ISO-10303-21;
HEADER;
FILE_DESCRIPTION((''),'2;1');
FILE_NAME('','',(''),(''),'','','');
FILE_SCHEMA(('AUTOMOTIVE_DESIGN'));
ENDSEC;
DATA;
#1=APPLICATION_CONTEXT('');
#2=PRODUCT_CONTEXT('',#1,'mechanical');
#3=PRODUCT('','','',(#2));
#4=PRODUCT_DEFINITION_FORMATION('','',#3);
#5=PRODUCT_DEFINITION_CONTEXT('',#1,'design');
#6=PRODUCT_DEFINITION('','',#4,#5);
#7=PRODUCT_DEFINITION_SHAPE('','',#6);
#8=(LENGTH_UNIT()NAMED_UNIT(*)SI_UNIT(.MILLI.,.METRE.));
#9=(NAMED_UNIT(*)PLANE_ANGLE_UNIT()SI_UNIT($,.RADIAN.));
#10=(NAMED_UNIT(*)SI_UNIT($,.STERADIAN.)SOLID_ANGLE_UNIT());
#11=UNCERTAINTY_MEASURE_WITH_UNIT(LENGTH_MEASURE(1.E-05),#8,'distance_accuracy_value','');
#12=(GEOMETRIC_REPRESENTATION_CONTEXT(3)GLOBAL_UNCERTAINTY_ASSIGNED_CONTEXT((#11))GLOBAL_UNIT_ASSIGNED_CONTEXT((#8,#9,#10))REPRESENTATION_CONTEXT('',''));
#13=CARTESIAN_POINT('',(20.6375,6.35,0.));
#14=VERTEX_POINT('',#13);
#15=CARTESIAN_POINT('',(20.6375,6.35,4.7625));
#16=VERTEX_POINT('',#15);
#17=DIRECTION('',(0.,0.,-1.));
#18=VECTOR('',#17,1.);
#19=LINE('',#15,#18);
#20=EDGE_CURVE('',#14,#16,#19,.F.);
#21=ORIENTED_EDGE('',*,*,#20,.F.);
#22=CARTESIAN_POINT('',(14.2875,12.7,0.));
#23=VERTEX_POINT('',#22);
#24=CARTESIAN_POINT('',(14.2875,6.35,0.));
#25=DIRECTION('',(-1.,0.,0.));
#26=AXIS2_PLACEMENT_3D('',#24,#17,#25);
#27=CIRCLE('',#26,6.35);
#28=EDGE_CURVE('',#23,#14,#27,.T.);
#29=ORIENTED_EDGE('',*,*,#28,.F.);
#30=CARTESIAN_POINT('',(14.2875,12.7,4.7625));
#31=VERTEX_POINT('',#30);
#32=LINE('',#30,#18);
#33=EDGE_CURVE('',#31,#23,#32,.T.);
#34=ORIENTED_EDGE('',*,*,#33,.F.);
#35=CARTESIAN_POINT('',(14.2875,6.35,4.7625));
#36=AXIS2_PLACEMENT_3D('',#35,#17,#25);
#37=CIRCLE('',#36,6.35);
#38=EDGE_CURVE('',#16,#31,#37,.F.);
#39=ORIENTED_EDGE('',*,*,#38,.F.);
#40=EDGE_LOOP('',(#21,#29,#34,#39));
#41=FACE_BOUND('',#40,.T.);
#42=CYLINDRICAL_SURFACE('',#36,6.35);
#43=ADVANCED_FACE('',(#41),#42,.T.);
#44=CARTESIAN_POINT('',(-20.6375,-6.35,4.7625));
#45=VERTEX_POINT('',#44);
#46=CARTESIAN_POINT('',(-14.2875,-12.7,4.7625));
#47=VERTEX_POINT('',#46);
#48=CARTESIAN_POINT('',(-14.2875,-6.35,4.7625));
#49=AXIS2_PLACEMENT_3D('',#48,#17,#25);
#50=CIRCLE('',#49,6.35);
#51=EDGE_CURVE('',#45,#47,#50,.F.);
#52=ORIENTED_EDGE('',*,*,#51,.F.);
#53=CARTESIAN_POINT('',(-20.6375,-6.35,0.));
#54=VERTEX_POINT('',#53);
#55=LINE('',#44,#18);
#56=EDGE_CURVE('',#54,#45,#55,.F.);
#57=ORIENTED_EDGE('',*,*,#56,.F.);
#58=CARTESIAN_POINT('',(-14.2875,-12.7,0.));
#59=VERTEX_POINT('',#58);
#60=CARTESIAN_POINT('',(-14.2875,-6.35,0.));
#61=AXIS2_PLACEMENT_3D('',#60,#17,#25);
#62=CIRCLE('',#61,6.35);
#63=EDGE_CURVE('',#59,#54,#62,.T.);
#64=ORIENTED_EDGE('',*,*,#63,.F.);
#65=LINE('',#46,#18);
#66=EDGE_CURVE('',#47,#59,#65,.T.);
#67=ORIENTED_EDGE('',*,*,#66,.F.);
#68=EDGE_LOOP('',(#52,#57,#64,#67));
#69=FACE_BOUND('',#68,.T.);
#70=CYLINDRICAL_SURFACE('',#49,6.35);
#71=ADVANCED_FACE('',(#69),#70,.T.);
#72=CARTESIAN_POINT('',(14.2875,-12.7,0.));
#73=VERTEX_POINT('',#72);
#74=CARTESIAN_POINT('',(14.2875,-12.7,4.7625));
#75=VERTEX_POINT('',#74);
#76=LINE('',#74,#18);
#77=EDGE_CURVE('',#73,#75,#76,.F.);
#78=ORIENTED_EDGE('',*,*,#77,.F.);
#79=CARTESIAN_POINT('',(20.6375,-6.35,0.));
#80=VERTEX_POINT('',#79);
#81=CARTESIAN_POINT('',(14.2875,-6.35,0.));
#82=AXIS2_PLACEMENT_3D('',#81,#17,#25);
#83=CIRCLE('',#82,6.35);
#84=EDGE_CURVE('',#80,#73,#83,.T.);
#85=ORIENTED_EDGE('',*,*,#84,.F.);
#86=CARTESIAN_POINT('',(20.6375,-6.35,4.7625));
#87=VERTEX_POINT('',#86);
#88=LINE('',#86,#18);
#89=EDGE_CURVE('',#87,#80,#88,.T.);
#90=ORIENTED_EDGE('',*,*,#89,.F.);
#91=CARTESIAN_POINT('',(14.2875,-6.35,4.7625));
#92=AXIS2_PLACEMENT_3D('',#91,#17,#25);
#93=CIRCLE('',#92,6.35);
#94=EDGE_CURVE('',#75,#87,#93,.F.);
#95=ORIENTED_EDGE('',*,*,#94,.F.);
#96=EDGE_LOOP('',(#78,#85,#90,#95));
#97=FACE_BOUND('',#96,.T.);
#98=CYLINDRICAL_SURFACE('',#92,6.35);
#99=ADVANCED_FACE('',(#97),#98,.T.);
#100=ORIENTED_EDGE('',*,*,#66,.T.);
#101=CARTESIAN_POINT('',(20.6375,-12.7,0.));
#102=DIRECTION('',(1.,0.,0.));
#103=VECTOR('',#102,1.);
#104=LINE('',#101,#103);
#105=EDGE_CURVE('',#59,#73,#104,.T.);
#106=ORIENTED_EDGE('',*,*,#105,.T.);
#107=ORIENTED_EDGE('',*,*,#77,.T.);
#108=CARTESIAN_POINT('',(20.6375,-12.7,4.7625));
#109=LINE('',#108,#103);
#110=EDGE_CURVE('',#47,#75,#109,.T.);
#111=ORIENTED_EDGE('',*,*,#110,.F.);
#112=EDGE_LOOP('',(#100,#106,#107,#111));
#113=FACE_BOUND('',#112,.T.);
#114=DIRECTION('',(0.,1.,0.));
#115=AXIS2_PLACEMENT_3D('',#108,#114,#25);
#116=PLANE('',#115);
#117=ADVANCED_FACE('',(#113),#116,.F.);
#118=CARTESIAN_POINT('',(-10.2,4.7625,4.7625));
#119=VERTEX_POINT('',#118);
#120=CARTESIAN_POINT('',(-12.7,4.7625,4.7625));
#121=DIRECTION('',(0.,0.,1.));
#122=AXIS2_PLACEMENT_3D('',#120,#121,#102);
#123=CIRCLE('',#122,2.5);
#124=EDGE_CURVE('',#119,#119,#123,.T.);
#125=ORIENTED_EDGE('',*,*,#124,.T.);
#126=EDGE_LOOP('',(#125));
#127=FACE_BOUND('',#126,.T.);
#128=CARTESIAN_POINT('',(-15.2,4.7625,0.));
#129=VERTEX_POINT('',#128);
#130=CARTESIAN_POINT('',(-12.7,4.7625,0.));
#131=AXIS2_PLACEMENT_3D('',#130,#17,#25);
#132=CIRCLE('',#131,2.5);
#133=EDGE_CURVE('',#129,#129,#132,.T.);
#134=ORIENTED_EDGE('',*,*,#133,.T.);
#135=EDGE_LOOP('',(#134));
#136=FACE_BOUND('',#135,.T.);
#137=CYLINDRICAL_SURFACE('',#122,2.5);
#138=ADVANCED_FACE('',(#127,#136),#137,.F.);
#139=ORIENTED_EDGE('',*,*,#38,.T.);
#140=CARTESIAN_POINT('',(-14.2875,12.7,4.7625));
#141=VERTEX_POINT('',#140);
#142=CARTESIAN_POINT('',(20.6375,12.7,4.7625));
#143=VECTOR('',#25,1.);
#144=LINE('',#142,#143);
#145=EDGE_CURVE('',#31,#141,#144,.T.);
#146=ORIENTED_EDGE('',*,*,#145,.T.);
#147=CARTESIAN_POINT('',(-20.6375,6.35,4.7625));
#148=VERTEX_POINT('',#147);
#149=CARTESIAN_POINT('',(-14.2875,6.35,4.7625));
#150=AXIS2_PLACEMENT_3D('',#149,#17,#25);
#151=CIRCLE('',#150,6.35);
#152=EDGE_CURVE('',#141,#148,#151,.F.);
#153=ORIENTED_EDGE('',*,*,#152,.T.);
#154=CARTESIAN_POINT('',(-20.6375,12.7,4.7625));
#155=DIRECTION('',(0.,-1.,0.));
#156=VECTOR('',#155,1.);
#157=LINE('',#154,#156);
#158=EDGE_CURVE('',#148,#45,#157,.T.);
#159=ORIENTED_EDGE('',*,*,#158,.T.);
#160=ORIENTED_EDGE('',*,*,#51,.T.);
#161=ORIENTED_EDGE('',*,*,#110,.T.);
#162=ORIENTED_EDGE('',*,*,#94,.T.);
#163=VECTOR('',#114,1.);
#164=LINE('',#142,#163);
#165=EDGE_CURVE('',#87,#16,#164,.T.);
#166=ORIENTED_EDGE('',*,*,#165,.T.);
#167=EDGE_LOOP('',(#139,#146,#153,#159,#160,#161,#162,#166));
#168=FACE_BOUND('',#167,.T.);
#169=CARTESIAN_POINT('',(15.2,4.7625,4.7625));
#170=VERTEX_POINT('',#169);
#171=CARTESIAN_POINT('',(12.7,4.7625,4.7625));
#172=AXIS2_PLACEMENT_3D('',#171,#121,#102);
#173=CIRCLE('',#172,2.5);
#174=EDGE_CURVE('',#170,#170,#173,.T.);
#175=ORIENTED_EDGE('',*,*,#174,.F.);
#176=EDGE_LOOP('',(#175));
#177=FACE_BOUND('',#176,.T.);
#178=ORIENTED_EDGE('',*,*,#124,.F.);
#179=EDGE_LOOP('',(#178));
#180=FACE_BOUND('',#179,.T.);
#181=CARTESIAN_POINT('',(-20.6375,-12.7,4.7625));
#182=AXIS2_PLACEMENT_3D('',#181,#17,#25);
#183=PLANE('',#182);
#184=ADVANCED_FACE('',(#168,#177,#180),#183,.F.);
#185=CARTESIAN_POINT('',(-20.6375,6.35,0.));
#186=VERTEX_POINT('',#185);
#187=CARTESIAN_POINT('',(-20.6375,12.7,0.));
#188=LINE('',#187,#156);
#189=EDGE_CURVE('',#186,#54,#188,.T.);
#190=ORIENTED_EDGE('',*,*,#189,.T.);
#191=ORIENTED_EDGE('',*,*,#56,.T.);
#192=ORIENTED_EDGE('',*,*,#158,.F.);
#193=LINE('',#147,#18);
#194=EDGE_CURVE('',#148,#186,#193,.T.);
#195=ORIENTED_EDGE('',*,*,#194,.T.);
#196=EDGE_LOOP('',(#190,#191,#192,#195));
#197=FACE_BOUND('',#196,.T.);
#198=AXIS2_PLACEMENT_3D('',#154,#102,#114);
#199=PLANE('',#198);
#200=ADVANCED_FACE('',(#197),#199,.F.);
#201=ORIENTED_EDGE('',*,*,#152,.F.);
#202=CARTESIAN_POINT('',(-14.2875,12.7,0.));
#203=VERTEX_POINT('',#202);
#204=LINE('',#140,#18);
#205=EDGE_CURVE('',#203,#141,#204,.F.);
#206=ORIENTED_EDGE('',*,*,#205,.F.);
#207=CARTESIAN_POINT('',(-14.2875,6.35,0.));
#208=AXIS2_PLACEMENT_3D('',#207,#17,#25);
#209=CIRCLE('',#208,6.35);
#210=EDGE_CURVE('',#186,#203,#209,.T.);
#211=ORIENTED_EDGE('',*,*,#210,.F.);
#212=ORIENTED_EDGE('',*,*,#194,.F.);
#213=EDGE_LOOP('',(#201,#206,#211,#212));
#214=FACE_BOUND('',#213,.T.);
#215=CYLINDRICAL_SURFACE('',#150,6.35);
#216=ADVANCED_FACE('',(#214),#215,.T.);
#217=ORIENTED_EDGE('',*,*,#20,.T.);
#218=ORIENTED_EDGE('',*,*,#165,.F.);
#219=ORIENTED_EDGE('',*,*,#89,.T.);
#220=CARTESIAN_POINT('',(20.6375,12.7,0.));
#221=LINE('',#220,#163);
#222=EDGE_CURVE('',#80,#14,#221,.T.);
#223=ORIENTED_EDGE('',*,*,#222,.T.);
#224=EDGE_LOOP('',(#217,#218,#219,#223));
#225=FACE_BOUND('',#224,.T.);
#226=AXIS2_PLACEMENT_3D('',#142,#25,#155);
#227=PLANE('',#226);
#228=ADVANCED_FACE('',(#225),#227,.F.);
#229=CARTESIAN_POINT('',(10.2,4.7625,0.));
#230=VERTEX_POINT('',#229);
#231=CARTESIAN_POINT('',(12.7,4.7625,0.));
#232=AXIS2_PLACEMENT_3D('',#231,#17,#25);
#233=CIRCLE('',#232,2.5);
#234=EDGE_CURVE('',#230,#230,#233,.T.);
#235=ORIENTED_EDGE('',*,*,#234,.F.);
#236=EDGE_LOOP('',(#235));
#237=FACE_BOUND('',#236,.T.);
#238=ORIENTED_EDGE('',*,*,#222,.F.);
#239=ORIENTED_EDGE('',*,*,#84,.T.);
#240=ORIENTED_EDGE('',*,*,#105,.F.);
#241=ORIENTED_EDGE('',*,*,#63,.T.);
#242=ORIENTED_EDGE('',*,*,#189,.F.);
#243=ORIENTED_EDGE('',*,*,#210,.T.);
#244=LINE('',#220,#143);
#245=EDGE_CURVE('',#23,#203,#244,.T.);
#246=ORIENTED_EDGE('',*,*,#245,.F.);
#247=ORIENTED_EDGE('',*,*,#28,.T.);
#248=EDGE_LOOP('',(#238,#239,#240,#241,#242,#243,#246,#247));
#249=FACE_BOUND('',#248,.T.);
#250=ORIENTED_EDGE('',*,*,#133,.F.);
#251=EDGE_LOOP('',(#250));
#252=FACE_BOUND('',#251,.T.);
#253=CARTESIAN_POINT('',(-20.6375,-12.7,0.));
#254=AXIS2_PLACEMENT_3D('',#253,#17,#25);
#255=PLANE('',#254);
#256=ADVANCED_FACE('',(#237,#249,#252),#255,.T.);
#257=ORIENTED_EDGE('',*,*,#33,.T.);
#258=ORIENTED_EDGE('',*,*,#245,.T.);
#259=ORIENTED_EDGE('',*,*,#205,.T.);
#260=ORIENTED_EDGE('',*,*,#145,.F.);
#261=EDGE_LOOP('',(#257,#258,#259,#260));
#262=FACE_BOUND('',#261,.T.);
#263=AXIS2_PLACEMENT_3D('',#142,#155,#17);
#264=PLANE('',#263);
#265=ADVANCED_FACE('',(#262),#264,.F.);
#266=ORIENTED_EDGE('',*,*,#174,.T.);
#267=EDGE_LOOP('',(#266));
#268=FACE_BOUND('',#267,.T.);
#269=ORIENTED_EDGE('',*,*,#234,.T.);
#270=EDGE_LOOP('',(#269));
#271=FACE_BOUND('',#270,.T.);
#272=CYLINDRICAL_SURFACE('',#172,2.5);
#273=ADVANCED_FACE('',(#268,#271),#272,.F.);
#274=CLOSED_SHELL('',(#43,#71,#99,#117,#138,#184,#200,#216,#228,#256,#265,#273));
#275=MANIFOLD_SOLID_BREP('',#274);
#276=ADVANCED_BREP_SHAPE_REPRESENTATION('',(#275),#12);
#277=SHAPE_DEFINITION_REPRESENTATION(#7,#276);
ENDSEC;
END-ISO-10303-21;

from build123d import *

# Parameters (mm, degrees)
SKETCH1_W             = 41.275
SKETCH1_H             = 25.4
BASE_FLANGE1_DEPTH    = 4.7625
BREAK_CORNER1_DEPTH   = 4.7625
M6X1_0_TAPPED_HOLE1_D = 5


# Read off the part's stored shape, not the designer's step: Break-Corner1
# Sheet-metal steps are written as plain solids
with BuildPart() as part:
    # Sketch1 → Base-Flange1 (new body)
    with BuildSketch(Plane.XY):
        Rectangle(SKETCH1_W, SKETCH1_H)
    extrude(amount=BASE_FLANGE1_DEPTH)

    # Break-Corner1 outline → Break-Corner1 (cut)
    with BuildSketch(Plane.XY):
        with BuildLine():
            Line((-20.6375, 12.7), (-20.6375, 6.35))
            ThreePointArc((-20.6375, 6.35), (-18.777628061, 10.840128061), (-14.2875, 12.7))
            Line((-14.2875, 12.7), (-20.6375, 12.7))
        make_face()
        with BuildLine():
            ThreePointArc((-14.2875, -12.7), (-18.777628061, -10.840128061), (-20.6375, -6.35))
            Line((-20.6375, -6.35), (-20.6375, -12.7))
            Line((-20.6375, -12.7), (-14.2875, -12.7))
        make_face()
        with BuildLine():
            Line((20.6375, 12.7), (14.2875, 12.7))
            ThreePointArc((14.2875, 12.7), (18.777628061, 10.840128061), (20.6375, 6.35))
            Line((20.6375, 6.35), (20.6375, 12.7))
        make_face()
        with BuildLine():
            ThreePointArc((20.6375, -6.35), (18.777628061, -10.840128061), (14.2875, -12.7))
            Line((14.2875, -12.7), (20.6375, -12.7))
            Line((20.6375, -12.7), (20.6375, -6.35))
        make_face()
    extrude(amount=BREAK_CORNER1_DEPTH, mode=Mode.SUBTRACT)

    # M6x1.0 Tapped Hole1 (through all)
    with Locations(Plane.XY.offset(4.7625)):
        with Locations((-12.7, 4.7625), (12.7, 4.7625)):
            Hole(M6X1_0_TAPPED_HOLE1_D / 2)


solid = part.part
